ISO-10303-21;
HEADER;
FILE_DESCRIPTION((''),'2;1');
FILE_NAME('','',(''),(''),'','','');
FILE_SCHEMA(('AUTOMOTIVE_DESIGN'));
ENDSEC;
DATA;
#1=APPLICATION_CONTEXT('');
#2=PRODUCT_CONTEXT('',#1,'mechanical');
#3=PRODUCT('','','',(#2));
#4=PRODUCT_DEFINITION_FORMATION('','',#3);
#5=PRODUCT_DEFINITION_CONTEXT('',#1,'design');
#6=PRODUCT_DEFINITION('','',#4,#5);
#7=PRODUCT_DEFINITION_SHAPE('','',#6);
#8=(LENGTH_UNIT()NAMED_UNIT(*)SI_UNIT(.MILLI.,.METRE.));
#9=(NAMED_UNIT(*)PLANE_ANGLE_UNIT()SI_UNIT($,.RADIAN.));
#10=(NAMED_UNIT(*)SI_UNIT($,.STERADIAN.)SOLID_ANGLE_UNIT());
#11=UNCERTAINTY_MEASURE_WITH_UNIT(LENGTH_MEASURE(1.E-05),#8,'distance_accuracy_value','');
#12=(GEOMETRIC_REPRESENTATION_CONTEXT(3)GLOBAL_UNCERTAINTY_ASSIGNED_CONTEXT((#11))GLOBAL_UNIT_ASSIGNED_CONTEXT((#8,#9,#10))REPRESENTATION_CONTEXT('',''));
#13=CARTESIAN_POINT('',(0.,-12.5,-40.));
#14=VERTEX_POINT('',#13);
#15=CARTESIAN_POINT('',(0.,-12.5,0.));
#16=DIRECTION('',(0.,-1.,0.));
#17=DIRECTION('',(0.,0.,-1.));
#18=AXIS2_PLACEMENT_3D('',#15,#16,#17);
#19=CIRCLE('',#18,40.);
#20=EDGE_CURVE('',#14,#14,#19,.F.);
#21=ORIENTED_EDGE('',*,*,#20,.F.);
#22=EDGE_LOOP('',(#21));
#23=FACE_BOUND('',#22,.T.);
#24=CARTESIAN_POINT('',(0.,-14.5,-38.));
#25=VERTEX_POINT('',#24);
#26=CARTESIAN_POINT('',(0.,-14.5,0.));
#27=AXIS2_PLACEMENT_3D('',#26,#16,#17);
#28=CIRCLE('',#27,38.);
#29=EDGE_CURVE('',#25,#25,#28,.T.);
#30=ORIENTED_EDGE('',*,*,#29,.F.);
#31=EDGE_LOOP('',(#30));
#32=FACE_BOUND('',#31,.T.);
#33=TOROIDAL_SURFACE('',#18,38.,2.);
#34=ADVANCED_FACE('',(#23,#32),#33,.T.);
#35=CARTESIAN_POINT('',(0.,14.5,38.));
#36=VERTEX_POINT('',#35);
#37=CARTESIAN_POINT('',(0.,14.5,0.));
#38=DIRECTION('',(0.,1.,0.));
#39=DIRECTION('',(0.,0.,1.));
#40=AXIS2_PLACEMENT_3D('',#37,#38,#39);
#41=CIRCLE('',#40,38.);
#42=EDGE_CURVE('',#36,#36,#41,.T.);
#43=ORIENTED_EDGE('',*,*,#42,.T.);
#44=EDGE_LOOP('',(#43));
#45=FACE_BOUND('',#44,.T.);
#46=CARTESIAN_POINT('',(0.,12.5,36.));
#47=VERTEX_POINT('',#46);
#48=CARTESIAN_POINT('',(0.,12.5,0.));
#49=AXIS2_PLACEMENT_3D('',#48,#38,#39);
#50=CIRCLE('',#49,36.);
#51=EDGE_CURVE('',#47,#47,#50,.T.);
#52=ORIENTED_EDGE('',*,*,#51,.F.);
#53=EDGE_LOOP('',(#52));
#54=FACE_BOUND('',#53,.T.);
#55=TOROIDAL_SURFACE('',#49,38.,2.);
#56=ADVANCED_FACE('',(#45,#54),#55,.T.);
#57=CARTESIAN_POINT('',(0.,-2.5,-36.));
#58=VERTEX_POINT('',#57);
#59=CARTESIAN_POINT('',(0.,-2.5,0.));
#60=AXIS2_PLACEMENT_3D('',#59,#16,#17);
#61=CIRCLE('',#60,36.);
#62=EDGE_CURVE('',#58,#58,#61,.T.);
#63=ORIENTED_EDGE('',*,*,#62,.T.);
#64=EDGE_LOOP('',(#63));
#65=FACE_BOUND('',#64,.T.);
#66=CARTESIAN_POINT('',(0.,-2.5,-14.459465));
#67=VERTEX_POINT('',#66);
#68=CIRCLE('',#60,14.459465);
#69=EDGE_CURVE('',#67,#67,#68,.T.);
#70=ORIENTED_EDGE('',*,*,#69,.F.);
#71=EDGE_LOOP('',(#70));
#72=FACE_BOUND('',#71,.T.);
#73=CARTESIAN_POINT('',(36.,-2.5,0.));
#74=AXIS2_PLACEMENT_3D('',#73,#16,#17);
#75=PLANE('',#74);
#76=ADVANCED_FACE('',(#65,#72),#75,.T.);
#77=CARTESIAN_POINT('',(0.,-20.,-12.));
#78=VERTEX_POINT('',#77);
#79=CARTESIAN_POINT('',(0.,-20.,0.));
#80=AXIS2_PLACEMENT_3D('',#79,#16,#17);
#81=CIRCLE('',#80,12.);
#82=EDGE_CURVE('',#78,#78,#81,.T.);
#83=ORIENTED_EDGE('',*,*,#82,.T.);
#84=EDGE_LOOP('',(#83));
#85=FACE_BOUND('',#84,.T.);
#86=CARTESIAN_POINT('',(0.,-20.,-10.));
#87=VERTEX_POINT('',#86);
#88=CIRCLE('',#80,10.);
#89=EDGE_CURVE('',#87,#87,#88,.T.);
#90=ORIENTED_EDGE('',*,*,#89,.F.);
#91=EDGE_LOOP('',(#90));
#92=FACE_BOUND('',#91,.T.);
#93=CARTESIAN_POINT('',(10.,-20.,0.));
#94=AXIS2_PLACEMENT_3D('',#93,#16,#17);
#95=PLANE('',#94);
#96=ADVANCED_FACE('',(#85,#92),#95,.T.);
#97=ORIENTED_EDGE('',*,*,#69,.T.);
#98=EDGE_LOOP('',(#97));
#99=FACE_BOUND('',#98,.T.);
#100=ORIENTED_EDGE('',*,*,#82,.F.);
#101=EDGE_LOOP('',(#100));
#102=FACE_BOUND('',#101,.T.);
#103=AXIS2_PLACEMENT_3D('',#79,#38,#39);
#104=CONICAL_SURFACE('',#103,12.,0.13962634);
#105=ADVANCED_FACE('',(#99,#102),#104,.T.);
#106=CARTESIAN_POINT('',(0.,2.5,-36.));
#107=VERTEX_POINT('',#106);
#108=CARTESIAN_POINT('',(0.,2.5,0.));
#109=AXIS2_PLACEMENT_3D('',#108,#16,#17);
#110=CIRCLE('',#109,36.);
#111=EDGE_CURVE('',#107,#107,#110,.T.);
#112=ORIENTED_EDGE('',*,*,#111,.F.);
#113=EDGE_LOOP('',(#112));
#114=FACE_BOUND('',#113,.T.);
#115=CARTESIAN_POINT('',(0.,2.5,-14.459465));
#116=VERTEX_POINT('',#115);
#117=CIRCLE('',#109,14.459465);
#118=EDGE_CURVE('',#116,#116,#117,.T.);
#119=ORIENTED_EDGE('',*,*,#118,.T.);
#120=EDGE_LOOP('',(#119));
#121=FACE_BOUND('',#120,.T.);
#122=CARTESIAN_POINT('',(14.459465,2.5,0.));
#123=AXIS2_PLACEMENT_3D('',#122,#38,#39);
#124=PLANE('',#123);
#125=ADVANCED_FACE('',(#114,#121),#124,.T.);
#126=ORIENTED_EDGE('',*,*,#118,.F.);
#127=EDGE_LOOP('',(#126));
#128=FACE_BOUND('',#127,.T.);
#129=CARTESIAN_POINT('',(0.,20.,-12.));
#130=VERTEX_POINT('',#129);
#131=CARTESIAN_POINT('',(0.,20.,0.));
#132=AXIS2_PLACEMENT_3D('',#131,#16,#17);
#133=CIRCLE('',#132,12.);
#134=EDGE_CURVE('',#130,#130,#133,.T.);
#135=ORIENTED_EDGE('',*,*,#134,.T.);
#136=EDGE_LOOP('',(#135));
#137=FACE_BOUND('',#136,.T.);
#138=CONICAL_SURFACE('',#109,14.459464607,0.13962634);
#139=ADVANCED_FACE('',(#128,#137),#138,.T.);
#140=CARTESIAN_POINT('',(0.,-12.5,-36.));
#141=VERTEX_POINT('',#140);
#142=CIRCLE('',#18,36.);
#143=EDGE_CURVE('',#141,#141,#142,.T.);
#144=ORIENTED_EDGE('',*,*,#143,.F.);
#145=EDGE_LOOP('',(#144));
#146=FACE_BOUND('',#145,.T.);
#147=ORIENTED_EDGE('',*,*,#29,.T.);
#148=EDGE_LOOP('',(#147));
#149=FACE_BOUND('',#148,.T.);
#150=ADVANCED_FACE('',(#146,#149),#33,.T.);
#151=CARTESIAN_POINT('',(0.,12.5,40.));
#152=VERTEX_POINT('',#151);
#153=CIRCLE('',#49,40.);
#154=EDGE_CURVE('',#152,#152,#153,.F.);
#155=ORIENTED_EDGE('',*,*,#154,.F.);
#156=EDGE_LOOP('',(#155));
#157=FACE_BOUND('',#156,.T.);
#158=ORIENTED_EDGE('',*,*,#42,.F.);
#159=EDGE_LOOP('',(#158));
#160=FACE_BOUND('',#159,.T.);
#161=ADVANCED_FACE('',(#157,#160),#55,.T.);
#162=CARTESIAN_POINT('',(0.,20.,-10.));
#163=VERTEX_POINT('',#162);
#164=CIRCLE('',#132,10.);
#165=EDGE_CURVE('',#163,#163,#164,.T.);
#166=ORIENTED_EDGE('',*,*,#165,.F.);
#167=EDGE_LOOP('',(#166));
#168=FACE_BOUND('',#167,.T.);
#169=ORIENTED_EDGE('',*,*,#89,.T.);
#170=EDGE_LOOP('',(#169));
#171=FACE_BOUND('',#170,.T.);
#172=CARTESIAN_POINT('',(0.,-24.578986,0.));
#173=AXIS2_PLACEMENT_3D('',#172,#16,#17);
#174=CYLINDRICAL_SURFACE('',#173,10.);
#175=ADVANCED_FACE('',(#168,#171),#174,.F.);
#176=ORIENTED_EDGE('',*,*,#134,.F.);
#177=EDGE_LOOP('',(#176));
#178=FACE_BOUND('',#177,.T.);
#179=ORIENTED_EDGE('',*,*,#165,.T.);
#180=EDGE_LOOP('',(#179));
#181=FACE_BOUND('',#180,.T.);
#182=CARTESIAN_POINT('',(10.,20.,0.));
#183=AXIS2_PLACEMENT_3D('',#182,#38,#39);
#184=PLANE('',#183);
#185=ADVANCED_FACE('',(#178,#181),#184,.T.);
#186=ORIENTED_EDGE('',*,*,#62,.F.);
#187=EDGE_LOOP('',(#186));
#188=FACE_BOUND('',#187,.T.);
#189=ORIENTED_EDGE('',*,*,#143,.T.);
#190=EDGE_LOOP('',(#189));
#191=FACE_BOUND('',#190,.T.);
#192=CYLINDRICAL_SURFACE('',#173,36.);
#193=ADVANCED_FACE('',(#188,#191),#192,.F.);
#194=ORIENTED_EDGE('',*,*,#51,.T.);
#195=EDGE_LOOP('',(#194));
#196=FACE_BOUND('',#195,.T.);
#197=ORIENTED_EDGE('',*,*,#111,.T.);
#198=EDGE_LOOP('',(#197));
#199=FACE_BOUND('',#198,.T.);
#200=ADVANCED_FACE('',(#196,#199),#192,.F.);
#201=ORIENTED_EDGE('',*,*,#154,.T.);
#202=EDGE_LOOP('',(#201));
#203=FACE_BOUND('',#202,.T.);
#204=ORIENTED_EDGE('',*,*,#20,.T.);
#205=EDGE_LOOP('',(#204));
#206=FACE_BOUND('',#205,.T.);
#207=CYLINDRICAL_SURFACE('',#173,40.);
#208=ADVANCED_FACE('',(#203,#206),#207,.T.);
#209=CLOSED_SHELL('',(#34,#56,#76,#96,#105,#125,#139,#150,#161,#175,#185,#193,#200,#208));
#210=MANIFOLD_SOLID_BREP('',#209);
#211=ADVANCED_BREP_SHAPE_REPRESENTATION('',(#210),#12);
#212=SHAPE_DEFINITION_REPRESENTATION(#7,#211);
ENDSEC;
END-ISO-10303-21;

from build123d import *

# Parameters (mm, degrees)
FILLET2_R = 2


with BuildPart() as part:
    # Sketch1 → Revolve1 (revolve)
    with BuildSketch(Plane.XY, mode=Mode.PRIVATE) as revolve1_sk:
        Polygon((10, -20), (12, -20), (14.459464607, -2.5), (36, -2.5), (36, -14.5), (40, -14.5), (40, 14.5), (36, 14.5), (36, 2.5), (14.459464607, 2.5), (12, 20), (10, 20), align=None)
    revolve(revolve1_sk.sketch.rotate(Axis((0, -24.578986378, 0), (0, 1, 0)), 90), axis=Axis((0, -24.578986378, 0), (0, 1, 0)))

    # Fillet2
    fillet2_edges = [part.edges().sort_by_distance(p)[0] for p in [
        (0, 14.5, 36),
        (0, 14.5, 40),
        (0, -14.5, 40),
        (0, -14.5, 36),
    ]]
    fillet(fillet2_edges, radius=FILLET2_R - 0.0001)  # a hair under: the kernel refuses the full size


solid = part.part
